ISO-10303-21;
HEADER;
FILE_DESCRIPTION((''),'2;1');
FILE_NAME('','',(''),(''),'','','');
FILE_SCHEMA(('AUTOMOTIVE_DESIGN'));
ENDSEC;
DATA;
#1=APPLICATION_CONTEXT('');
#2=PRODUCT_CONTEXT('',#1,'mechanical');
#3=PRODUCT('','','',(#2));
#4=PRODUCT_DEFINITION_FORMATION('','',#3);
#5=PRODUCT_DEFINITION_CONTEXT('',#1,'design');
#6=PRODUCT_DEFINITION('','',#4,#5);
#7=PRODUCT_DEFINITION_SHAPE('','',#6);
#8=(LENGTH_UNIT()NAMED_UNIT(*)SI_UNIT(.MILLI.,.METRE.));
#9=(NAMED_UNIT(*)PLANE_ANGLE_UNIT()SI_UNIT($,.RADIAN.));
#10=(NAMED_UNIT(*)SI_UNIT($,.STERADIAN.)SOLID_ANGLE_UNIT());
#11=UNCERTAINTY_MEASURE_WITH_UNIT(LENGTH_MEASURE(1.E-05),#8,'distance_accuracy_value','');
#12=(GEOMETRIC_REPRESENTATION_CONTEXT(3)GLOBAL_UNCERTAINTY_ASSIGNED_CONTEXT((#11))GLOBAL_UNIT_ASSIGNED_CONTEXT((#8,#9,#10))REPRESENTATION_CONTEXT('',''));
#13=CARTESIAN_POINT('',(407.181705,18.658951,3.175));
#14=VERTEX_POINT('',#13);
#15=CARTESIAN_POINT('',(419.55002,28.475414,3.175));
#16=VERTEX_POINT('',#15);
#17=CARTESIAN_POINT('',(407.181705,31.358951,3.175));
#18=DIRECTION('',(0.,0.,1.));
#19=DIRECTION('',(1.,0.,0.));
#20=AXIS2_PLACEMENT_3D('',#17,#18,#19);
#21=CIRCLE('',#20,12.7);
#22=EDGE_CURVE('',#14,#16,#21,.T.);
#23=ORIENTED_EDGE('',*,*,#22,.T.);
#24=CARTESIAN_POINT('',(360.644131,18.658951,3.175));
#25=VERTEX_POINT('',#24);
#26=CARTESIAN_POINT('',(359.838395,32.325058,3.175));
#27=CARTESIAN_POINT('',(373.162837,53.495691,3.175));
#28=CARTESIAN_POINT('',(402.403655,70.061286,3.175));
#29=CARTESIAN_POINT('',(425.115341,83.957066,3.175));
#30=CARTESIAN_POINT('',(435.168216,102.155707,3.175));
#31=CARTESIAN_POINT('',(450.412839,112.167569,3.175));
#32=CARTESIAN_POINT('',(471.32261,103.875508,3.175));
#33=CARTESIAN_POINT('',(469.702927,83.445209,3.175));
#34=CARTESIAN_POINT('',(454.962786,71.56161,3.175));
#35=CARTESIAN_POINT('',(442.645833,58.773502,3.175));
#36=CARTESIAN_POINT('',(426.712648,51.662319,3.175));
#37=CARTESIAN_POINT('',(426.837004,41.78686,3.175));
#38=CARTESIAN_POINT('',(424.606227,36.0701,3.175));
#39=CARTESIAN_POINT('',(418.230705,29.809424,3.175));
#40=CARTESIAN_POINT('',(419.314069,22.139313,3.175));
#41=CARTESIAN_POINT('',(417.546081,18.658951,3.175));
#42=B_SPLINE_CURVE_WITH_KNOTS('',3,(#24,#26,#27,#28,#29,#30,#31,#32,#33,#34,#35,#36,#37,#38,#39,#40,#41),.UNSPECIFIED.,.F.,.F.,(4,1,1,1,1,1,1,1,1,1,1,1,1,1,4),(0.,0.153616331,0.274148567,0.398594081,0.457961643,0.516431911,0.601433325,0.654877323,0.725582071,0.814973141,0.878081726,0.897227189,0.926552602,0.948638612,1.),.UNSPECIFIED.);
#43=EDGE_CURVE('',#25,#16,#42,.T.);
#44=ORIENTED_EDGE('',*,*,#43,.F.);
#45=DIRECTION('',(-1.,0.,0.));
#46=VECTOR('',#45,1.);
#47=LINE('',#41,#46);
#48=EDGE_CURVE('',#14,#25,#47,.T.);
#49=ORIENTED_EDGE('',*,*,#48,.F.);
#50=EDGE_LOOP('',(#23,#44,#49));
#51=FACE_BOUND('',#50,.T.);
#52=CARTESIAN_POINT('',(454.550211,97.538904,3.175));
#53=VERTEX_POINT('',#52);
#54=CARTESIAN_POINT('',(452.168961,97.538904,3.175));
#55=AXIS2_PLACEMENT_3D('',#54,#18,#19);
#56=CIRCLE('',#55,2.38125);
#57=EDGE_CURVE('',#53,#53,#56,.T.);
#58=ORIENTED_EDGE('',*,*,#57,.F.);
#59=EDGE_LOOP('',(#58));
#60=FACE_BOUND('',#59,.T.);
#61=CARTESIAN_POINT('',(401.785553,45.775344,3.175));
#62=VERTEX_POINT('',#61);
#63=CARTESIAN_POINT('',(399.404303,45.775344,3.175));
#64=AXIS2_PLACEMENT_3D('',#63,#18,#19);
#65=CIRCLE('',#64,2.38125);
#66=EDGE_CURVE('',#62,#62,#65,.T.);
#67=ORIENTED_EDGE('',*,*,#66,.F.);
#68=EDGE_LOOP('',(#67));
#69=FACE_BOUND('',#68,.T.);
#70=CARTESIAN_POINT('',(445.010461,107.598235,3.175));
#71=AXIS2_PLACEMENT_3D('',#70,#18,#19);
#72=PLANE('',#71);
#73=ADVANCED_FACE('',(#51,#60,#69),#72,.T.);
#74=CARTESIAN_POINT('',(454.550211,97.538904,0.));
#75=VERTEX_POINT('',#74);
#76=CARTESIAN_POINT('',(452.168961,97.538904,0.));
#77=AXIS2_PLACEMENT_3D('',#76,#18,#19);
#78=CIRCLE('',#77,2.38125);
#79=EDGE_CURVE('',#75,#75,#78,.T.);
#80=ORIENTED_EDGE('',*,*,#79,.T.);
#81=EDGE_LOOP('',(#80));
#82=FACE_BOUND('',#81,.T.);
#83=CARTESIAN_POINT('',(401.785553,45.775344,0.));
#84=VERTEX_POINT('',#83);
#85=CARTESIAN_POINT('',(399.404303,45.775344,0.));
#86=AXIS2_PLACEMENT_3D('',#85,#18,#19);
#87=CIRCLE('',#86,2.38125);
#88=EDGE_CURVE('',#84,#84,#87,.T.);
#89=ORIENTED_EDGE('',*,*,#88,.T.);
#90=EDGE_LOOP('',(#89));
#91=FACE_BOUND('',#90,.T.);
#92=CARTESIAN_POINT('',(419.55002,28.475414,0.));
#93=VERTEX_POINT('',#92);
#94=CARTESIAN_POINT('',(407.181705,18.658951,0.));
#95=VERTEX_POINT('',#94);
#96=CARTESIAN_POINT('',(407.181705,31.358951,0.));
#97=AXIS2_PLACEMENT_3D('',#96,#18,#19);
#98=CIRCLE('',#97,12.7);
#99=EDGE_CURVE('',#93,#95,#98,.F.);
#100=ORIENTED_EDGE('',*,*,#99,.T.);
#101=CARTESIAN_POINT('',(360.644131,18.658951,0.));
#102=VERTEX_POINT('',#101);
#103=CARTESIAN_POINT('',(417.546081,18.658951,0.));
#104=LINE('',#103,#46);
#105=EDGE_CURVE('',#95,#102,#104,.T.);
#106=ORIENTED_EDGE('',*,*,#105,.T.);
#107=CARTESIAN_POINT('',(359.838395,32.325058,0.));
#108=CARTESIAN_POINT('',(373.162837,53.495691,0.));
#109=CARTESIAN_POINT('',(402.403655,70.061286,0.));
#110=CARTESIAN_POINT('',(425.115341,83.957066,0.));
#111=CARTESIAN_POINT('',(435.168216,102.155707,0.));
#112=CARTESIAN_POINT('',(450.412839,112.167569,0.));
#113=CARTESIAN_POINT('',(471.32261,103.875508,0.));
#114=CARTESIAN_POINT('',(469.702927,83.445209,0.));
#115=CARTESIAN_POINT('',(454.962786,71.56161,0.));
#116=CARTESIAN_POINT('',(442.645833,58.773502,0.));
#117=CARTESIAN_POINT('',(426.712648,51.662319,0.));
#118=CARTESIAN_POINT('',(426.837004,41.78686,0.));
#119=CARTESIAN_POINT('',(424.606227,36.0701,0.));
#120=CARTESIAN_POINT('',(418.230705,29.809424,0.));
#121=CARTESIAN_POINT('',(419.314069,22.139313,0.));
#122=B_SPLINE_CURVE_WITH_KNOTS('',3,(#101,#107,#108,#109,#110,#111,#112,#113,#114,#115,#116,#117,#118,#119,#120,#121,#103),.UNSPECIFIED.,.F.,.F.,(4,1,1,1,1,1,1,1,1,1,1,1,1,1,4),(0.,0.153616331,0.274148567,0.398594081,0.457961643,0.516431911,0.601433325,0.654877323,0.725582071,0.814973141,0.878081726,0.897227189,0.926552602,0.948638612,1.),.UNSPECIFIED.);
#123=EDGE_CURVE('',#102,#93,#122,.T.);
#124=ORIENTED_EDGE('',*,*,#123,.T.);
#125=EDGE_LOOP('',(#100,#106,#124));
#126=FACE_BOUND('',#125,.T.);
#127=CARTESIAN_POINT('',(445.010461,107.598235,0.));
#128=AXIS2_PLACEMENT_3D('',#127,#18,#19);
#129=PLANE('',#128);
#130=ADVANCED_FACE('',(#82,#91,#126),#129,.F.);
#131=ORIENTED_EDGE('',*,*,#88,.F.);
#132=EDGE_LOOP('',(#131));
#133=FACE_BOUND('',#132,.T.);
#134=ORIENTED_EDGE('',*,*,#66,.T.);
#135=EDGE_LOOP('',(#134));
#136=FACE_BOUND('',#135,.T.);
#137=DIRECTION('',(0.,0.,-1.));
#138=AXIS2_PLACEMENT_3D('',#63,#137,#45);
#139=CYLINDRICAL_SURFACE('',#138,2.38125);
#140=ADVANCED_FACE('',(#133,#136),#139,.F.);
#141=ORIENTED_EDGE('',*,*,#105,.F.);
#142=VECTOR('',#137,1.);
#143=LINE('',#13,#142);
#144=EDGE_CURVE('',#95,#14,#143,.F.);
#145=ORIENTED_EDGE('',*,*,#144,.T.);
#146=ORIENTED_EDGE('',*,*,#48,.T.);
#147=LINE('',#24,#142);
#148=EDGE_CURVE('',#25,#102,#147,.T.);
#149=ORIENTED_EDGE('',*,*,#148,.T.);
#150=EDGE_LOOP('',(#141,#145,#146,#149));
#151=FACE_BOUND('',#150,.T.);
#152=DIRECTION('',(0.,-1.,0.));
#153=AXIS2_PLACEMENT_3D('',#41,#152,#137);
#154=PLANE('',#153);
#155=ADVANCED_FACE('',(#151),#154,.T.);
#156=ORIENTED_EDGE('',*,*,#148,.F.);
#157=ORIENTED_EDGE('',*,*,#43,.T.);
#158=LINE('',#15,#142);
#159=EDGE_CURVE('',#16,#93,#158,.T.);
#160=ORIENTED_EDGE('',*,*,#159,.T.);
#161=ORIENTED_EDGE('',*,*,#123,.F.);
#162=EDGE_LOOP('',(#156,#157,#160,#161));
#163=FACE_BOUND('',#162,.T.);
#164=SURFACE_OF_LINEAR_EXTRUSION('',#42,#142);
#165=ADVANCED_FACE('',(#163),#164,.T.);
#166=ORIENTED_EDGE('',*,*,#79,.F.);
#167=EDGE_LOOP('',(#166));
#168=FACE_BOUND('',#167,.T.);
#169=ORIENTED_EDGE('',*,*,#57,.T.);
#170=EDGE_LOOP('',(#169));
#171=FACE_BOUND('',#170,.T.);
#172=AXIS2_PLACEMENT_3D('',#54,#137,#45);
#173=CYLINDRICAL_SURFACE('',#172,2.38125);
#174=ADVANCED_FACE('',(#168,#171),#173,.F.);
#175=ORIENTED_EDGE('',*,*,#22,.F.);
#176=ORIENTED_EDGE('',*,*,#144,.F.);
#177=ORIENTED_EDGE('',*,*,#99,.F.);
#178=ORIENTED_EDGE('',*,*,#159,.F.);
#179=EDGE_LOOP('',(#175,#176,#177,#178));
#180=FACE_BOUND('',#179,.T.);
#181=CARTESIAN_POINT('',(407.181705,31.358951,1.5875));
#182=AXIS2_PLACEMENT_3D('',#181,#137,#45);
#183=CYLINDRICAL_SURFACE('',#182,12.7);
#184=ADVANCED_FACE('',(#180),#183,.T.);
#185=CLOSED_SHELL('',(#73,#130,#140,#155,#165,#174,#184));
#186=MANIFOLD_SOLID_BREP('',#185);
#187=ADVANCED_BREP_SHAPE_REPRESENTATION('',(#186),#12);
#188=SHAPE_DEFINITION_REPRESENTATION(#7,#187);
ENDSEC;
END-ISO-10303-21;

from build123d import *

# Parameters (mm, degrees)
SKETCH1_R           = 2.38125
BOSS_EXTRUDE1_DEPTH = 3.175
FILLET1_START       = -1
FILLET1_DEPTH       = 5


with BuildPart() as part:
    # Sketch1 → Boss-Extrude1 (new body)
    with BuildSketch(Plane.XY):
        with BuildLine():
            Line((417.546081306, 18.658951039), (360.644130569, 18.658951039))
            add(Edge.make_bspline(
                [(360.644130569, 18.658951039), (359.838395401, 32.32505811), (373.162837365, 53.495691257), (402.403655017, 70.061286374), (425.115341274, 83.957066052), (435.168216309, 102.155706872), (450.412839391, 112.167568554), (471.322609911, 103.87550785), (469.702927035, 83.445208809), (454.962785943, 71.561610112), (442.645833335, 58.773501793), (426.712648337, 51.662319225), (426.83700418, 41.786859869), (424.606227179, 36.070100281), (418.230705297, 29.809424472), (419.314069358, 22.139312518), (417.546081306, 18.658951039)],
                knots=[0, 0, 0, 0, 0.153616331, 0.274148567, 0.398594081, 0.457961643, 0.516431911, 0.601433325, 0.654877323, 0.725582071, 0.814973141, 0.878081726, 0.897227189, 0.926552602, 0.948638612, 1, 1, 1, 1], degree=3))
        make_face()
        with Locations((452.168961384, 97.538903913)):
            Circle(SKETCH1_R, mode=Mode.SUBTRACT)
        with Locations((399.40430293, 45.775343541)):
            Circle(SKETCH1_R, mode=Mode.SUBTRACT)
    extrude(amount=BOSS_EXTRUDE1_DEPTH)

    # Fillet1: read off the stored shape, not the designer's step
    # Fillet1 outline → Fillet1 (cut)
    with BuildSketch(Plane.XY.offset(FILLET1_START)):
        with BuildLine():
            add(Edge.make_bspline(
                [(419.550020031, 28.475414315), (418.771360058, 25.135518643), (418.907467493, 21.33889904), (417.546081306, 18.658951039)],
                knots=[0.960450703, 0.960450703, 0.960450703, 0.960450703, 1, 1, 1, 1], degree=3))
            ThreePointArc((419.550020031, 28.475414315), (415.07692775, 21.41131523), (407.18170503, 18.658951039))
            Line((407.18170503, 18.658951039), (417.546081306, 18.658951039))
        make_face()
    extrude(amount=FILLET1_DEPTH, mode=Mode.SUBTRACT)


solid = part.part
